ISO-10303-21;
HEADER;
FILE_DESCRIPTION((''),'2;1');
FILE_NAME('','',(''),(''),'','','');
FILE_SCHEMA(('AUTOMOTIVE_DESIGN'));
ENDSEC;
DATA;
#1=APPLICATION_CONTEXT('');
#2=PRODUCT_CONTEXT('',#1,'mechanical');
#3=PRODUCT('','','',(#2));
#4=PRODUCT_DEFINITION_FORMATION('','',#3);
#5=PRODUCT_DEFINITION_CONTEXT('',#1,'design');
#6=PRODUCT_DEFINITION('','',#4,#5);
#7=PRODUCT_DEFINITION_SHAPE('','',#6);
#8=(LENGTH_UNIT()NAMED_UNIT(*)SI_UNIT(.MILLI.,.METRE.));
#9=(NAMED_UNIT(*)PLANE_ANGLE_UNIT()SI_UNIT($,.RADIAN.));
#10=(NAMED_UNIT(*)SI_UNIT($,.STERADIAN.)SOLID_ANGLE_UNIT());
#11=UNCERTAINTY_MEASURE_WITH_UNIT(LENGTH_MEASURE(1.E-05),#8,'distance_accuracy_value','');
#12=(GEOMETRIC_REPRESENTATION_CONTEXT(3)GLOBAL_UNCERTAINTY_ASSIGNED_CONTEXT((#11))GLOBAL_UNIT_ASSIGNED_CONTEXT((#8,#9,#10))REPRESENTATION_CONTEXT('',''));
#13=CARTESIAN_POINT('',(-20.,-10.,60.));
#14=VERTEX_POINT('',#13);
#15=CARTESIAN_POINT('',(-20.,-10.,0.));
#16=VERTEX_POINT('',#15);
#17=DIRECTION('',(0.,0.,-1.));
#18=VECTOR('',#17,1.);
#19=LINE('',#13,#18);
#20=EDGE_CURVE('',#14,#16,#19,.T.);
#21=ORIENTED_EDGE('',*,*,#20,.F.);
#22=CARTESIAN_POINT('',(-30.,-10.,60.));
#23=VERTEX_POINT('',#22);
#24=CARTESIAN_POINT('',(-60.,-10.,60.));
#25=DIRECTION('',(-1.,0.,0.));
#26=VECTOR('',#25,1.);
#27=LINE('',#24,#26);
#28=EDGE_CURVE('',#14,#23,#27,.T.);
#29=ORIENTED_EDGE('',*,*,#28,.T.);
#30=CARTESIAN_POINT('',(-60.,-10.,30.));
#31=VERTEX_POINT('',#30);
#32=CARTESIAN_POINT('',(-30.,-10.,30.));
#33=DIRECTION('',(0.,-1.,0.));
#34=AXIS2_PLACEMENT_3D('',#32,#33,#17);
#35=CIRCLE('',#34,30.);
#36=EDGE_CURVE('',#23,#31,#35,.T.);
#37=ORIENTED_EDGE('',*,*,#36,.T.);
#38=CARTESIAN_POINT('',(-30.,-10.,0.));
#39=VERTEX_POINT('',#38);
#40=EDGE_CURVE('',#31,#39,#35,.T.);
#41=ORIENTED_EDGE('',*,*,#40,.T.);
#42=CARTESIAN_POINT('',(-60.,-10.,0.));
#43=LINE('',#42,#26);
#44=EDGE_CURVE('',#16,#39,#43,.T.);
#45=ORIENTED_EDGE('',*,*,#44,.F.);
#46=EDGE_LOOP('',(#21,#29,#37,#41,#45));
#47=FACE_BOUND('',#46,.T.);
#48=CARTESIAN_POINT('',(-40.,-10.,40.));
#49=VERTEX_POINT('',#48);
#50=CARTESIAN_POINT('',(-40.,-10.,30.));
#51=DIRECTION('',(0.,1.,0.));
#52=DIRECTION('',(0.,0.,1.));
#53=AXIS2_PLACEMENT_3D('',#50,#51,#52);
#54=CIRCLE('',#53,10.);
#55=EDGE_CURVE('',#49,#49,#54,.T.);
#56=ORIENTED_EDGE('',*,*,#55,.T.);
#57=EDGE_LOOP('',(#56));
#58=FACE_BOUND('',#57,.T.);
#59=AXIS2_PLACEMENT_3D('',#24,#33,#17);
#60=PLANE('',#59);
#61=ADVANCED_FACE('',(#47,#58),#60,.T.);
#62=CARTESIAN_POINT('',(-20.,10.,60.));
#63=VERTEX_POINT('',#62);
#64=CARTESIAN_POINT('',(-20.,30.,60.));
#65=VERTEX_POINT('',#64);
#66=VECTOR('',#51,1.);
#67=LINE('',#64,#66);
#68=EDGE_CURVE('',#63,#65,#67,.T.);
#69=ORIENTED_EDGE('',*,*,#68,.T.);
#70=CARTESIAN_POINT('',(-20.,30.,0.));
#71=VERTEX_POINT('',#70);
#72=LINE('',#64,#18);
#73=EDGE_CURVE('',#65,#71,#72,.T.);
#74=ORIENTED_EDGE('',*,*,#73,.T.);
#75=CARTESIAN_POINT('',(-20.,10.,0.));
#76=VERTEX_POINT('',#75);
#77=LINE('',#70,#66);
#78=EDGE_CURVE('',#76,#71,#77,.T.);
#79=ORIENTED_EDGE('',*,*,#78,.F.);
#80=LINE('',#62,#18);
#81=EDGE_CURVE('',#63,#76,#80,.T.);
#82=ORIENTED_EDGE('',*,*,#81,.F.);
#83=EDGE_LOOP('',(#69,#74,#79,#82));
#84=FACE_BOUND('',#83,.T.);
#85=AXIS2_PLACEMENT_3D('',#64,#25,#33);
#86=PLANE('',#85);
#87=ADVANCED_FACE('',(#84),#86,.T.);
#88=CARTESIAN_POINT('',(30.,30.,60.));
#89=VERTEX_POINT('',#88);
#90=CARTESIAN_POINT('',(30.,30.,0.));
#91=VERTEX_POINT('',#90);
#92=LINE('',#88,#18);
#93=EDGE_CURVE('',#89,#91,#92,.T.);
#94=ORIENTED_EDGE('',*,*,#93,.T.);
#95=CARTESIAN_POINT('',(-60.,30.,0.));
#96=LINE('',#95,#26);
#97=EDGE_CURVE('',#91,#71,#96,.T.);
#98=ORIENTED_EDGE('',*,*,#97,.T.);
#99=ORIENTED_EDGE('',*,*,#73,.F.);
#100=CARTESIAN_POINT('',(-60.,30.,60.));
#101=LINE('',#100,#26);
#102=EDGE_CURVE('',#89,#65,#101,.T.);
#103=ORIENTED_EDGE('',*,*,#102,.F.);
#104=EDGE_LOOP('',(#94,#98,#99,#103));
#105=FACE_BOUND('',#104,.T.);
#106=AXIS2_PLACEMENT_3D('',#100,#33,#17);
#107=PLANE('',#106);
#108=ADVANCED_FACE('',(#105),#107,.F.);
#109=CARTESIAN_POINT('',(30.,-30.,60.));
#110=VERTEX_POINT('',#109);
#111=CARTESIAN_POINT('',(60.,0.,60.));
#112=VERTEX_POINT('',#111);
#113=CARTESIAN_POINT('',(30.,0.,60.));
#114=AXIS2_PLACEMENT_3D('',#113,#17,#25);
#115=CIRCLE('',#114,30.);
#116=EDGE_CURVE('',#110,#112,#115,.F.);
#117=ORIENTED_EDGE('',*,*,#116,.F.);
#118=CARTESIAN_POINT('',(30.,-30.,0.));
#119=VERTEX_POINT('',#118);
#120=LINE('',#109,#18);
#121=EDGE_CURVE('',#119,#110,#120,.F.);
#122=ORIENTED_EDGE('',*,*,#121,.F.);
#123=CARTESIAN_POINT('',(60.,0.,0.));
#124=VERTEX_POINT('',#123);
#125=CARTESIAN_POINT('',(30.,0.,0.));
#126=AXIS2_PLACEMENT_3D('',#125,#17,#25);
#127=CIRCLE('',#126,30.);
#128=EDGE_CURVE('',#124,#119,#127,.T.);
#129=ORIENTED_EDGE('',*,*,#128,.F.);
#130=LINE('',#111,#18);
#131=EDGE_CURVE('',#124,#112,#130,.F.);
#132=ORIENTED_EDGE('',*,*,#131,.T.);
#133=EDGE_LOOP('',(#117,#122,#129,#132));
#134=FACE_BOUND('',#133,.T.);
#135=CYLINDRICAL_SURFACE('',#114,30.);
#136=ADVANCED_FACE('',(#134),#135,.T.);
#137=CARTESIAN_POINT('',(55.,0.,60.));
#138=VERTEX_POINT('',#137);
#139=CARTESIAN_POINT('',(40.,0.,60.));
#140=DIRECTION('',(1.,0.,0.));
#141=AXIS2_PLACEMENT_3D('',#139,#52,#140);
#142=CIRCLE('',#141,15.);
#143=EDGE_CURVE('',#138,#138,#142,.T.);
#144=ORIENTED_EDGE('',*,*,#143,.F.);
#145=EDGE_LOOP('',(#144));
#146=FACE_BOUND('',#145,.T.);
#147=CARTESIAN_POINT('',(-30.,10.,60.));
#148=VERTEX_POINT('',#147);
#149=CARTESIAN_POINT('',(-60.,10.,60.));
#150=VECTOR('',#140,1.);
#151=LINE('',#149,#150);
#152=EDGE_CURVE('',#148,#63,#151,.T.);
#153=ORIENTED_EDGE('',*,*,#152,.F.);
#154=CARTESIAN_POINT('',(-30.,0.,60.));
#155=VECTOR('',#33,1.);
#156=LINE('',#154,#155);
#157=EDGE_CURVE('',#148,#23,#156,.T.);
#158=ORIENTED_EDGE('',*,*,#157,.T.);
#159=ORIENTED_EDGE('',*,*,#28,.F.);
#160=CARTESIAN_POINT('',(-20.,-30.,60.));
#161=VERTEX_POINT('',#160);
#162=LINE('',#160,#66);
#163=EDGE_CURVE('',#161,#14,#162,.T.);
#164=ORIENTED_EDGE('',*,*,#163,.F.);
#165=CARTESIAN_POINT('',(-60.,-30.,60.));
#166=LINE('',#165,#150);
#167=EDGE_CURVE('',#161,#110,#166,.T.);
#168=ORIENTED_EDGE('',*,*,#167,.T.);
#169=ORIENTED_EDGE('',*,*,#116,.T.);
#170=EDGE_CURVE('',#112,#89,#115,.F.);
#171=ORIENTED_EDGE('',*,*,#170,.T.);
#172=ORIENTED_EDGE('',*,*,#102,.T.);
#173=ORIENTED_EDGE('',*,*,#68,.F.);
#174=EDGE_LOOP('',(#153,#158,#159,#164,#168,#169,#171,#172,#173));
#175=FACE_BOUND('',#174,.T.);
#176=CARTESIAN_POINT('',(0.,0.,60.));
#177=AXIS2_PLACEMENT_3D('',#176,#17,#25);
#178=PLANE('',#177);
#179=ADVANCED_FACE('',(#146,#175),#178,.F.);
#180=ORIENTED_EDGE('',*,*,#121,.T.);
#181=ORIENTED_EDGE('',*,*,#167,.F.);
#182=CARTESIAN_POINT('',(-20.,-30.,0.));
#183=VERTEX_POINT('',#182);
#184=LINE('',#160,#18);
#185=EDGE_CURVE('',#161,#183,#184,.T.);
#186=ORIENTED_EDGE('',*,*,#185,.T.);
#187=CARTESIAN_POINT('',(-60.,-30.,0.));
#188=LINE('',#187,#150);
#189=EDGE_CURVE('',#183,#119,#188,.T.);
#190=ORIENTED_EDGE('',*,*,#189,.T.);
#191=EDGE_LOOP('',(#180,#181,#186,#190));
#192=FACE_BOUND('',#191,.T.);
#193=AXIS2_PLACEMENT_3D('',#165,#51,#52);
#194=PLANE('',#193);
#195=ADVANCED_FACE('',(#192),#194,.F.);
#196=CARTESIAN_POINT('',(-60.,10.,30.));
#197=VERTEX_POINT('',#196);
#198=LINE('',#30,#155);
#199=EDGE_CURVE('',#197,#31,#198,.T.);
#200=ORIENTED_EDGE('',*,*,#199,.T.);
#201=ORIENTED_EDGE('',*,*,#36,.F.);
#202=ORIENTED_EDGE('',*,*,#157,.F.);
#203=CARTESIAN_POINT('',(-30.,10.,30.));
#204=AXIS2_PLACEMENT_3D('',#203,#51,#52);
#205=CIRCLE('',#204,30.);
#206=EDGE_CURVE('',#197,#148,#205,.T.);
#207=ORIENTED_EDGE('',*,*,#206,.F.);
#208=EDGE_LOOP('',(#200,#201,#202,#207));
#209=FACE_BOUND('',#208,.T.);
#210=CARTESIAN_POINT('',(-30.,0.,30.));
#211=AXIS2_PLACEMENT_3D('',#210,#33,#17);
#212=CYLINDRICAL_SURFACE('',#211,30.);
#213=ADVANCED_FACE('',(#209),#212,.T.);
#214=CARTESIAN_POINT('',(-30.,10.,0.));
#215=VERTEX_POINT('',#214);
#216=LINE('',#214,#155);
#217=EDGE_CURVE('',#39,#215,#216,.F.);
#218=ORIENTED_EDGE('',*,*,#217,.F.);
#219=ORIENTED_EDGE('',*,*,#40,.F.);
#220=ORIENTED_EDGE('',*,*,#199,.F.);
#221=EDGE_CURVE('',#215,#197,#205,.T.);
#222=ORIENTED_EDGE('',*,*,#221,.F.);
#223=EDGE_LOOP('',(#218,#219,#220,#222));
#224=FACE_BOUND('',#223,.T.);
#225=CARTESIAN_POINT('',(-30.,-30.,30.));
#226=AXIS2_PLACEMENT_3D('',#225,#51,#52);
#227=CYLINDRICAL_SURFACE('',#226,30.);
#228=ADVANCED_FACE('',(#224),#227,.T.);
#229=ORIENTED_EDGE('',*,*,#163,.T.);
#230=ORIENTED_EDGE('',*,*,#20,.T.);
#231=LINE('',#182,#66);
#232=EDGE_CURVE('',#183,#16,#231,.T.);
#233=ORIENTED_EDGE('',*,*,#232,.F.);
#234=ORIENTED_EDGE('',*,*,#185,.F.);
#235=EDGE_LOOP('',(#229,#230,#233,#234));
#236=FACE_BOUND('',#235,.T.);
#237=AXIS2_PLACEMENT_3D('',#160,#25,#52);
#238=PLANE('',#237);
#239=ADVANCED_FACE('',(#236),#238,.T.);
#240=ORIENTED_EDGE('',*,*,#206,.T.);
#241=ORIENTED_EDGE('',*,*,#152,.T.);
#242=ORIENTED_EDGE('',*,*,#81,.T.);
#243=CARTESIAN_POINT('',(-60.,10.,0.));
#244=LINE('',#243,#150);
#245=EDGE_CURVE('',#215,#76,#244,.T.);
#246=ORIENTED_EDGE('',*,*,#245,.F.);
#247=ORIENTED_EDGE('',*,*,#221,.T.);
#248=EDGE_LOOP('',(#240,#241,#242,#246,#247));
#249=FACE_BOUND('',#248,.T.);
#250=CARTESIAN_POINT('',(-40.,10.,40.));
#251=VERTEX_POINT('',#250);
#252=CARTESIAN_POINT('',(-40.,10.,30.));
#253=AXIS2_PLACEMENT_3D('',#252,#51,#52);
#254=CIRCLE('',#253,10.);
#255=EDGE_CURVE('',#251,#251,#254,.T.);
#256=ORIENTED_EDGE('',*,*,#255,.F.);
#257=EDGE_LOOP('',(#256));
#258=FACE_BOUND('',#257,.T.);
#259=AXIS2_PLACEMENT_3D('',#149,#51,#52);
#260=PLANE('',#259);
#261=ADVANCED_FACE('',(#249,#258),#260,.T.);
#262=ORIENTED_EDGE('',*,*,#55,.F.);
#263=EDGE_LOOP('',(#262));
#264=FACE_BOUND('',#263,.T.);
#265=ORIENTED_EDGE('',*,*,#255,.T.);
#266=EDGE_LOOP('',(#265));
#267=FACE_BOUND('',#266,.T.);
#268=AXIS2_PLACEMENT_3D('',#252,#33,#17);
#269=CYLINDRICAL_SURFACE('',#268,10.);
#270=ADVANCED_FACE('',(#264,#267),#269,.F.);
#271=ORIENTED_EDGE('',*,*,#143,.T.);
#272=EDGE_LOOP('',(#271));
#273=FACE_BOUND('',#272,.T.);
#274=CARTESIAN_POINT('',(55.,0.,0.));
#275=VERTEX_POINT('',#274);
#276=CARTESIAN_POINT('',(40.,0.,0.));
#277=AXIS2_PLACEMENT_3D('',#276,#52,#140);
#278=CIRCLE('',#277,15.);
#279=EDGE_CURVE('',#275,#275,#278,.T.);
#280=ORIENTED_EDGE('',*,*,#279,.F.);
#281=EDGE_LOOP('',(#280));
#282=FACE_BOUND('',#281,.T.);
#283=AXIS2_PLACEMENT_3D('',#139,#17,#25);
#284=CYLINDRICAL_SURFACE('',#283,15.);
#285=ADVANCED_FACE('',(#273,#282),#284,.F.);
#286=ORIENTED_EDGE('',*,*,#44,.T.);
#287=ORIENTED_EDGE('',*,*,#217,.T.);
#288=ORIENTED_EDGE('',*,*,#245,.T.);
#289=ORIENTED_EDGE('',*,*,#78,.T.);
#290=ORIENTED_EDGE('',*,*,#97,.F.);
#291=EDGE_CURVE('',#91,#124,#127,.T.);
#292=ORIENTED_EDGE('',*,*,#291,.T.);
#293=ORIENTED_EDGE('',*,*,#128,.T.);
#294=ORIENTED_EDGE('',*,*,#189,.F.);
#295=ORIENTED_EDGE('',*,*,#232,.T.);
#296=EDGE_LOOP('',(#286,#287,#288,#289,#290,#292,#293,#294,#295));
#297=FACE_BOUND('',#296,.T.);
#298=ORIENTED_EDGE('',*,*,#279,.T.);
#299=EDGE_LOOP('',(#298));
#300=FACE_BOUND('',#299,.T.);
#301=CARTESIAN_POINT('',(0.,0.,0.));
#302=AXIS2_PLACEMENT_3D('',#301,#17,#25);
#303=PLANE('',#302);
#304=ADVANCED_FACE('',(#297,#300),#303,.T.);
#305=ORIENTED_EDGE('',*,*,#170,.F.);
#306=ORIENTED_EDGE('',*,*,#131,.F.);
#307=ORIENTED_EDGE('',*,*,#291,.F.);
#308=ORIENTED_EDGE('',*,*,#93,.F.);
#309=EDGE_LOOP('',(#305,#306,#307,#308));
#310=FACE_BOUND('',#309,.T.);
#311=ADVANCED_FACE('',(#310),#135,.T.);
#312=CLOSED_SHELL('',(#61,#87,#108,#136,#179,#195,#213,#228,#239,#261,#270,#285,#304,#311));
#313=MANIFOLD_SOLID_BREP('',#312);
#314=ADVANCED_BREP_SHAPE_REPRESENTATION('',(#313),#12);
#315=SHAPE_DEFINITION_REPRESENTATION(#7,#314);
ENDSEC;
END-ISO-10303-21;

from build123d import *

# Parameters (mm, degrees)
CROQUIS4_W                 = 120
CROQUIS4_H                 = 60
SALIENTE_EXTRUIR3_DEPTH    = 60
REDONDEO1_R                = 30
CROQUIS5_W                 = 40
CROQUIS5_H                 = 20
CORTAR_EXTRUIR1_DEPTH      = 60
CORTAR_EXTRUIR2_DEPTH      = 10
CORTAR_EXTRUIR2_DEPTH_BACK = 10
CROQUIS6_R                 = 10
REDONDEO2_R                = 30
CROQUIS8_R                 = 15
CORTAR_EXTRUIR3_DEPTH      = 60


with BuildPart() as part:
    # Croquis4 → Saliente-Extruir3 (new body)
    with BuildSketch(Plane.XY):
        Rectangle(CROQUIS4_W, CROQUIS4_H)
    extrude(amount=SALIENTE_EXTRUIR3_DEPTH)

    # Redondeo1
    redondeo1_edges = [part.edges().sort_by_distance(p)[0] for p in [
        (60, -30, 30),
        (60, 30, 30),
    ]]
    fillet(redondeo1_edges, radius=REDONDEO1_R - 0.0001)  # a hair under: the kernel refuses the full size

    # Croquis5 → Cortar-Extruir1 (cut)
    with BuildSketch(Plane.XY):
        with Locations((-40, 20)):
            Rectangle(CROQUIS5_W, CROQUIS5_H)
        with Locations((-40, -20)):
            Rectangle(CROQUIS5_W, CROQUIS5_H)
    extrude(amount=CORTAR_EXTRUIR1_DEPTH, mode=Mode.SUBTRACT)

    # Croquis6 → Cortar-Extruir2 (cut, two sides: drawn at the far end of the back side and taken through both)
    with BuildSketch(Plane(origin=(0, 0, 0), x_dir=(1, 0, 0), z_dir=(0, 1, 0)).offset(-CORTAR_EXTRUIR2_DEPTH_BACK)):
        with Locations(Location((-40, -30, 0), (0, 0, 270))):
            Circle(CROQUIS6_R)
    extrude(amount=CORTAR_EXTRUIR2_DEPTH + CORTAR_EXTRUIR2_DEPTH_BACK, mode=Mode.SUBTRACT)

    # Redondeo2
    redondeo2_edges = [part.edges().sort_by_distance(p)[0] for p in [
        (-60, 0, 60),
        (-60, 0, 0),
    ]]
    fillet(redondeo2_edges, radius=REDONDEO2_R - 0.0001)  # a hair under: the kernel refuses the full size

    # Croquis8 → Cortar-Extruir3 (cut)
    with BuildSketch(Plane.XY):
        with Locations((40, 0)):
            Circle(CROQUIS8_R)
    extrude(amount=CORTAR_EXTRUIR3_DEPTH, mode=Mode.SUBTRACT)


solid = part.part
